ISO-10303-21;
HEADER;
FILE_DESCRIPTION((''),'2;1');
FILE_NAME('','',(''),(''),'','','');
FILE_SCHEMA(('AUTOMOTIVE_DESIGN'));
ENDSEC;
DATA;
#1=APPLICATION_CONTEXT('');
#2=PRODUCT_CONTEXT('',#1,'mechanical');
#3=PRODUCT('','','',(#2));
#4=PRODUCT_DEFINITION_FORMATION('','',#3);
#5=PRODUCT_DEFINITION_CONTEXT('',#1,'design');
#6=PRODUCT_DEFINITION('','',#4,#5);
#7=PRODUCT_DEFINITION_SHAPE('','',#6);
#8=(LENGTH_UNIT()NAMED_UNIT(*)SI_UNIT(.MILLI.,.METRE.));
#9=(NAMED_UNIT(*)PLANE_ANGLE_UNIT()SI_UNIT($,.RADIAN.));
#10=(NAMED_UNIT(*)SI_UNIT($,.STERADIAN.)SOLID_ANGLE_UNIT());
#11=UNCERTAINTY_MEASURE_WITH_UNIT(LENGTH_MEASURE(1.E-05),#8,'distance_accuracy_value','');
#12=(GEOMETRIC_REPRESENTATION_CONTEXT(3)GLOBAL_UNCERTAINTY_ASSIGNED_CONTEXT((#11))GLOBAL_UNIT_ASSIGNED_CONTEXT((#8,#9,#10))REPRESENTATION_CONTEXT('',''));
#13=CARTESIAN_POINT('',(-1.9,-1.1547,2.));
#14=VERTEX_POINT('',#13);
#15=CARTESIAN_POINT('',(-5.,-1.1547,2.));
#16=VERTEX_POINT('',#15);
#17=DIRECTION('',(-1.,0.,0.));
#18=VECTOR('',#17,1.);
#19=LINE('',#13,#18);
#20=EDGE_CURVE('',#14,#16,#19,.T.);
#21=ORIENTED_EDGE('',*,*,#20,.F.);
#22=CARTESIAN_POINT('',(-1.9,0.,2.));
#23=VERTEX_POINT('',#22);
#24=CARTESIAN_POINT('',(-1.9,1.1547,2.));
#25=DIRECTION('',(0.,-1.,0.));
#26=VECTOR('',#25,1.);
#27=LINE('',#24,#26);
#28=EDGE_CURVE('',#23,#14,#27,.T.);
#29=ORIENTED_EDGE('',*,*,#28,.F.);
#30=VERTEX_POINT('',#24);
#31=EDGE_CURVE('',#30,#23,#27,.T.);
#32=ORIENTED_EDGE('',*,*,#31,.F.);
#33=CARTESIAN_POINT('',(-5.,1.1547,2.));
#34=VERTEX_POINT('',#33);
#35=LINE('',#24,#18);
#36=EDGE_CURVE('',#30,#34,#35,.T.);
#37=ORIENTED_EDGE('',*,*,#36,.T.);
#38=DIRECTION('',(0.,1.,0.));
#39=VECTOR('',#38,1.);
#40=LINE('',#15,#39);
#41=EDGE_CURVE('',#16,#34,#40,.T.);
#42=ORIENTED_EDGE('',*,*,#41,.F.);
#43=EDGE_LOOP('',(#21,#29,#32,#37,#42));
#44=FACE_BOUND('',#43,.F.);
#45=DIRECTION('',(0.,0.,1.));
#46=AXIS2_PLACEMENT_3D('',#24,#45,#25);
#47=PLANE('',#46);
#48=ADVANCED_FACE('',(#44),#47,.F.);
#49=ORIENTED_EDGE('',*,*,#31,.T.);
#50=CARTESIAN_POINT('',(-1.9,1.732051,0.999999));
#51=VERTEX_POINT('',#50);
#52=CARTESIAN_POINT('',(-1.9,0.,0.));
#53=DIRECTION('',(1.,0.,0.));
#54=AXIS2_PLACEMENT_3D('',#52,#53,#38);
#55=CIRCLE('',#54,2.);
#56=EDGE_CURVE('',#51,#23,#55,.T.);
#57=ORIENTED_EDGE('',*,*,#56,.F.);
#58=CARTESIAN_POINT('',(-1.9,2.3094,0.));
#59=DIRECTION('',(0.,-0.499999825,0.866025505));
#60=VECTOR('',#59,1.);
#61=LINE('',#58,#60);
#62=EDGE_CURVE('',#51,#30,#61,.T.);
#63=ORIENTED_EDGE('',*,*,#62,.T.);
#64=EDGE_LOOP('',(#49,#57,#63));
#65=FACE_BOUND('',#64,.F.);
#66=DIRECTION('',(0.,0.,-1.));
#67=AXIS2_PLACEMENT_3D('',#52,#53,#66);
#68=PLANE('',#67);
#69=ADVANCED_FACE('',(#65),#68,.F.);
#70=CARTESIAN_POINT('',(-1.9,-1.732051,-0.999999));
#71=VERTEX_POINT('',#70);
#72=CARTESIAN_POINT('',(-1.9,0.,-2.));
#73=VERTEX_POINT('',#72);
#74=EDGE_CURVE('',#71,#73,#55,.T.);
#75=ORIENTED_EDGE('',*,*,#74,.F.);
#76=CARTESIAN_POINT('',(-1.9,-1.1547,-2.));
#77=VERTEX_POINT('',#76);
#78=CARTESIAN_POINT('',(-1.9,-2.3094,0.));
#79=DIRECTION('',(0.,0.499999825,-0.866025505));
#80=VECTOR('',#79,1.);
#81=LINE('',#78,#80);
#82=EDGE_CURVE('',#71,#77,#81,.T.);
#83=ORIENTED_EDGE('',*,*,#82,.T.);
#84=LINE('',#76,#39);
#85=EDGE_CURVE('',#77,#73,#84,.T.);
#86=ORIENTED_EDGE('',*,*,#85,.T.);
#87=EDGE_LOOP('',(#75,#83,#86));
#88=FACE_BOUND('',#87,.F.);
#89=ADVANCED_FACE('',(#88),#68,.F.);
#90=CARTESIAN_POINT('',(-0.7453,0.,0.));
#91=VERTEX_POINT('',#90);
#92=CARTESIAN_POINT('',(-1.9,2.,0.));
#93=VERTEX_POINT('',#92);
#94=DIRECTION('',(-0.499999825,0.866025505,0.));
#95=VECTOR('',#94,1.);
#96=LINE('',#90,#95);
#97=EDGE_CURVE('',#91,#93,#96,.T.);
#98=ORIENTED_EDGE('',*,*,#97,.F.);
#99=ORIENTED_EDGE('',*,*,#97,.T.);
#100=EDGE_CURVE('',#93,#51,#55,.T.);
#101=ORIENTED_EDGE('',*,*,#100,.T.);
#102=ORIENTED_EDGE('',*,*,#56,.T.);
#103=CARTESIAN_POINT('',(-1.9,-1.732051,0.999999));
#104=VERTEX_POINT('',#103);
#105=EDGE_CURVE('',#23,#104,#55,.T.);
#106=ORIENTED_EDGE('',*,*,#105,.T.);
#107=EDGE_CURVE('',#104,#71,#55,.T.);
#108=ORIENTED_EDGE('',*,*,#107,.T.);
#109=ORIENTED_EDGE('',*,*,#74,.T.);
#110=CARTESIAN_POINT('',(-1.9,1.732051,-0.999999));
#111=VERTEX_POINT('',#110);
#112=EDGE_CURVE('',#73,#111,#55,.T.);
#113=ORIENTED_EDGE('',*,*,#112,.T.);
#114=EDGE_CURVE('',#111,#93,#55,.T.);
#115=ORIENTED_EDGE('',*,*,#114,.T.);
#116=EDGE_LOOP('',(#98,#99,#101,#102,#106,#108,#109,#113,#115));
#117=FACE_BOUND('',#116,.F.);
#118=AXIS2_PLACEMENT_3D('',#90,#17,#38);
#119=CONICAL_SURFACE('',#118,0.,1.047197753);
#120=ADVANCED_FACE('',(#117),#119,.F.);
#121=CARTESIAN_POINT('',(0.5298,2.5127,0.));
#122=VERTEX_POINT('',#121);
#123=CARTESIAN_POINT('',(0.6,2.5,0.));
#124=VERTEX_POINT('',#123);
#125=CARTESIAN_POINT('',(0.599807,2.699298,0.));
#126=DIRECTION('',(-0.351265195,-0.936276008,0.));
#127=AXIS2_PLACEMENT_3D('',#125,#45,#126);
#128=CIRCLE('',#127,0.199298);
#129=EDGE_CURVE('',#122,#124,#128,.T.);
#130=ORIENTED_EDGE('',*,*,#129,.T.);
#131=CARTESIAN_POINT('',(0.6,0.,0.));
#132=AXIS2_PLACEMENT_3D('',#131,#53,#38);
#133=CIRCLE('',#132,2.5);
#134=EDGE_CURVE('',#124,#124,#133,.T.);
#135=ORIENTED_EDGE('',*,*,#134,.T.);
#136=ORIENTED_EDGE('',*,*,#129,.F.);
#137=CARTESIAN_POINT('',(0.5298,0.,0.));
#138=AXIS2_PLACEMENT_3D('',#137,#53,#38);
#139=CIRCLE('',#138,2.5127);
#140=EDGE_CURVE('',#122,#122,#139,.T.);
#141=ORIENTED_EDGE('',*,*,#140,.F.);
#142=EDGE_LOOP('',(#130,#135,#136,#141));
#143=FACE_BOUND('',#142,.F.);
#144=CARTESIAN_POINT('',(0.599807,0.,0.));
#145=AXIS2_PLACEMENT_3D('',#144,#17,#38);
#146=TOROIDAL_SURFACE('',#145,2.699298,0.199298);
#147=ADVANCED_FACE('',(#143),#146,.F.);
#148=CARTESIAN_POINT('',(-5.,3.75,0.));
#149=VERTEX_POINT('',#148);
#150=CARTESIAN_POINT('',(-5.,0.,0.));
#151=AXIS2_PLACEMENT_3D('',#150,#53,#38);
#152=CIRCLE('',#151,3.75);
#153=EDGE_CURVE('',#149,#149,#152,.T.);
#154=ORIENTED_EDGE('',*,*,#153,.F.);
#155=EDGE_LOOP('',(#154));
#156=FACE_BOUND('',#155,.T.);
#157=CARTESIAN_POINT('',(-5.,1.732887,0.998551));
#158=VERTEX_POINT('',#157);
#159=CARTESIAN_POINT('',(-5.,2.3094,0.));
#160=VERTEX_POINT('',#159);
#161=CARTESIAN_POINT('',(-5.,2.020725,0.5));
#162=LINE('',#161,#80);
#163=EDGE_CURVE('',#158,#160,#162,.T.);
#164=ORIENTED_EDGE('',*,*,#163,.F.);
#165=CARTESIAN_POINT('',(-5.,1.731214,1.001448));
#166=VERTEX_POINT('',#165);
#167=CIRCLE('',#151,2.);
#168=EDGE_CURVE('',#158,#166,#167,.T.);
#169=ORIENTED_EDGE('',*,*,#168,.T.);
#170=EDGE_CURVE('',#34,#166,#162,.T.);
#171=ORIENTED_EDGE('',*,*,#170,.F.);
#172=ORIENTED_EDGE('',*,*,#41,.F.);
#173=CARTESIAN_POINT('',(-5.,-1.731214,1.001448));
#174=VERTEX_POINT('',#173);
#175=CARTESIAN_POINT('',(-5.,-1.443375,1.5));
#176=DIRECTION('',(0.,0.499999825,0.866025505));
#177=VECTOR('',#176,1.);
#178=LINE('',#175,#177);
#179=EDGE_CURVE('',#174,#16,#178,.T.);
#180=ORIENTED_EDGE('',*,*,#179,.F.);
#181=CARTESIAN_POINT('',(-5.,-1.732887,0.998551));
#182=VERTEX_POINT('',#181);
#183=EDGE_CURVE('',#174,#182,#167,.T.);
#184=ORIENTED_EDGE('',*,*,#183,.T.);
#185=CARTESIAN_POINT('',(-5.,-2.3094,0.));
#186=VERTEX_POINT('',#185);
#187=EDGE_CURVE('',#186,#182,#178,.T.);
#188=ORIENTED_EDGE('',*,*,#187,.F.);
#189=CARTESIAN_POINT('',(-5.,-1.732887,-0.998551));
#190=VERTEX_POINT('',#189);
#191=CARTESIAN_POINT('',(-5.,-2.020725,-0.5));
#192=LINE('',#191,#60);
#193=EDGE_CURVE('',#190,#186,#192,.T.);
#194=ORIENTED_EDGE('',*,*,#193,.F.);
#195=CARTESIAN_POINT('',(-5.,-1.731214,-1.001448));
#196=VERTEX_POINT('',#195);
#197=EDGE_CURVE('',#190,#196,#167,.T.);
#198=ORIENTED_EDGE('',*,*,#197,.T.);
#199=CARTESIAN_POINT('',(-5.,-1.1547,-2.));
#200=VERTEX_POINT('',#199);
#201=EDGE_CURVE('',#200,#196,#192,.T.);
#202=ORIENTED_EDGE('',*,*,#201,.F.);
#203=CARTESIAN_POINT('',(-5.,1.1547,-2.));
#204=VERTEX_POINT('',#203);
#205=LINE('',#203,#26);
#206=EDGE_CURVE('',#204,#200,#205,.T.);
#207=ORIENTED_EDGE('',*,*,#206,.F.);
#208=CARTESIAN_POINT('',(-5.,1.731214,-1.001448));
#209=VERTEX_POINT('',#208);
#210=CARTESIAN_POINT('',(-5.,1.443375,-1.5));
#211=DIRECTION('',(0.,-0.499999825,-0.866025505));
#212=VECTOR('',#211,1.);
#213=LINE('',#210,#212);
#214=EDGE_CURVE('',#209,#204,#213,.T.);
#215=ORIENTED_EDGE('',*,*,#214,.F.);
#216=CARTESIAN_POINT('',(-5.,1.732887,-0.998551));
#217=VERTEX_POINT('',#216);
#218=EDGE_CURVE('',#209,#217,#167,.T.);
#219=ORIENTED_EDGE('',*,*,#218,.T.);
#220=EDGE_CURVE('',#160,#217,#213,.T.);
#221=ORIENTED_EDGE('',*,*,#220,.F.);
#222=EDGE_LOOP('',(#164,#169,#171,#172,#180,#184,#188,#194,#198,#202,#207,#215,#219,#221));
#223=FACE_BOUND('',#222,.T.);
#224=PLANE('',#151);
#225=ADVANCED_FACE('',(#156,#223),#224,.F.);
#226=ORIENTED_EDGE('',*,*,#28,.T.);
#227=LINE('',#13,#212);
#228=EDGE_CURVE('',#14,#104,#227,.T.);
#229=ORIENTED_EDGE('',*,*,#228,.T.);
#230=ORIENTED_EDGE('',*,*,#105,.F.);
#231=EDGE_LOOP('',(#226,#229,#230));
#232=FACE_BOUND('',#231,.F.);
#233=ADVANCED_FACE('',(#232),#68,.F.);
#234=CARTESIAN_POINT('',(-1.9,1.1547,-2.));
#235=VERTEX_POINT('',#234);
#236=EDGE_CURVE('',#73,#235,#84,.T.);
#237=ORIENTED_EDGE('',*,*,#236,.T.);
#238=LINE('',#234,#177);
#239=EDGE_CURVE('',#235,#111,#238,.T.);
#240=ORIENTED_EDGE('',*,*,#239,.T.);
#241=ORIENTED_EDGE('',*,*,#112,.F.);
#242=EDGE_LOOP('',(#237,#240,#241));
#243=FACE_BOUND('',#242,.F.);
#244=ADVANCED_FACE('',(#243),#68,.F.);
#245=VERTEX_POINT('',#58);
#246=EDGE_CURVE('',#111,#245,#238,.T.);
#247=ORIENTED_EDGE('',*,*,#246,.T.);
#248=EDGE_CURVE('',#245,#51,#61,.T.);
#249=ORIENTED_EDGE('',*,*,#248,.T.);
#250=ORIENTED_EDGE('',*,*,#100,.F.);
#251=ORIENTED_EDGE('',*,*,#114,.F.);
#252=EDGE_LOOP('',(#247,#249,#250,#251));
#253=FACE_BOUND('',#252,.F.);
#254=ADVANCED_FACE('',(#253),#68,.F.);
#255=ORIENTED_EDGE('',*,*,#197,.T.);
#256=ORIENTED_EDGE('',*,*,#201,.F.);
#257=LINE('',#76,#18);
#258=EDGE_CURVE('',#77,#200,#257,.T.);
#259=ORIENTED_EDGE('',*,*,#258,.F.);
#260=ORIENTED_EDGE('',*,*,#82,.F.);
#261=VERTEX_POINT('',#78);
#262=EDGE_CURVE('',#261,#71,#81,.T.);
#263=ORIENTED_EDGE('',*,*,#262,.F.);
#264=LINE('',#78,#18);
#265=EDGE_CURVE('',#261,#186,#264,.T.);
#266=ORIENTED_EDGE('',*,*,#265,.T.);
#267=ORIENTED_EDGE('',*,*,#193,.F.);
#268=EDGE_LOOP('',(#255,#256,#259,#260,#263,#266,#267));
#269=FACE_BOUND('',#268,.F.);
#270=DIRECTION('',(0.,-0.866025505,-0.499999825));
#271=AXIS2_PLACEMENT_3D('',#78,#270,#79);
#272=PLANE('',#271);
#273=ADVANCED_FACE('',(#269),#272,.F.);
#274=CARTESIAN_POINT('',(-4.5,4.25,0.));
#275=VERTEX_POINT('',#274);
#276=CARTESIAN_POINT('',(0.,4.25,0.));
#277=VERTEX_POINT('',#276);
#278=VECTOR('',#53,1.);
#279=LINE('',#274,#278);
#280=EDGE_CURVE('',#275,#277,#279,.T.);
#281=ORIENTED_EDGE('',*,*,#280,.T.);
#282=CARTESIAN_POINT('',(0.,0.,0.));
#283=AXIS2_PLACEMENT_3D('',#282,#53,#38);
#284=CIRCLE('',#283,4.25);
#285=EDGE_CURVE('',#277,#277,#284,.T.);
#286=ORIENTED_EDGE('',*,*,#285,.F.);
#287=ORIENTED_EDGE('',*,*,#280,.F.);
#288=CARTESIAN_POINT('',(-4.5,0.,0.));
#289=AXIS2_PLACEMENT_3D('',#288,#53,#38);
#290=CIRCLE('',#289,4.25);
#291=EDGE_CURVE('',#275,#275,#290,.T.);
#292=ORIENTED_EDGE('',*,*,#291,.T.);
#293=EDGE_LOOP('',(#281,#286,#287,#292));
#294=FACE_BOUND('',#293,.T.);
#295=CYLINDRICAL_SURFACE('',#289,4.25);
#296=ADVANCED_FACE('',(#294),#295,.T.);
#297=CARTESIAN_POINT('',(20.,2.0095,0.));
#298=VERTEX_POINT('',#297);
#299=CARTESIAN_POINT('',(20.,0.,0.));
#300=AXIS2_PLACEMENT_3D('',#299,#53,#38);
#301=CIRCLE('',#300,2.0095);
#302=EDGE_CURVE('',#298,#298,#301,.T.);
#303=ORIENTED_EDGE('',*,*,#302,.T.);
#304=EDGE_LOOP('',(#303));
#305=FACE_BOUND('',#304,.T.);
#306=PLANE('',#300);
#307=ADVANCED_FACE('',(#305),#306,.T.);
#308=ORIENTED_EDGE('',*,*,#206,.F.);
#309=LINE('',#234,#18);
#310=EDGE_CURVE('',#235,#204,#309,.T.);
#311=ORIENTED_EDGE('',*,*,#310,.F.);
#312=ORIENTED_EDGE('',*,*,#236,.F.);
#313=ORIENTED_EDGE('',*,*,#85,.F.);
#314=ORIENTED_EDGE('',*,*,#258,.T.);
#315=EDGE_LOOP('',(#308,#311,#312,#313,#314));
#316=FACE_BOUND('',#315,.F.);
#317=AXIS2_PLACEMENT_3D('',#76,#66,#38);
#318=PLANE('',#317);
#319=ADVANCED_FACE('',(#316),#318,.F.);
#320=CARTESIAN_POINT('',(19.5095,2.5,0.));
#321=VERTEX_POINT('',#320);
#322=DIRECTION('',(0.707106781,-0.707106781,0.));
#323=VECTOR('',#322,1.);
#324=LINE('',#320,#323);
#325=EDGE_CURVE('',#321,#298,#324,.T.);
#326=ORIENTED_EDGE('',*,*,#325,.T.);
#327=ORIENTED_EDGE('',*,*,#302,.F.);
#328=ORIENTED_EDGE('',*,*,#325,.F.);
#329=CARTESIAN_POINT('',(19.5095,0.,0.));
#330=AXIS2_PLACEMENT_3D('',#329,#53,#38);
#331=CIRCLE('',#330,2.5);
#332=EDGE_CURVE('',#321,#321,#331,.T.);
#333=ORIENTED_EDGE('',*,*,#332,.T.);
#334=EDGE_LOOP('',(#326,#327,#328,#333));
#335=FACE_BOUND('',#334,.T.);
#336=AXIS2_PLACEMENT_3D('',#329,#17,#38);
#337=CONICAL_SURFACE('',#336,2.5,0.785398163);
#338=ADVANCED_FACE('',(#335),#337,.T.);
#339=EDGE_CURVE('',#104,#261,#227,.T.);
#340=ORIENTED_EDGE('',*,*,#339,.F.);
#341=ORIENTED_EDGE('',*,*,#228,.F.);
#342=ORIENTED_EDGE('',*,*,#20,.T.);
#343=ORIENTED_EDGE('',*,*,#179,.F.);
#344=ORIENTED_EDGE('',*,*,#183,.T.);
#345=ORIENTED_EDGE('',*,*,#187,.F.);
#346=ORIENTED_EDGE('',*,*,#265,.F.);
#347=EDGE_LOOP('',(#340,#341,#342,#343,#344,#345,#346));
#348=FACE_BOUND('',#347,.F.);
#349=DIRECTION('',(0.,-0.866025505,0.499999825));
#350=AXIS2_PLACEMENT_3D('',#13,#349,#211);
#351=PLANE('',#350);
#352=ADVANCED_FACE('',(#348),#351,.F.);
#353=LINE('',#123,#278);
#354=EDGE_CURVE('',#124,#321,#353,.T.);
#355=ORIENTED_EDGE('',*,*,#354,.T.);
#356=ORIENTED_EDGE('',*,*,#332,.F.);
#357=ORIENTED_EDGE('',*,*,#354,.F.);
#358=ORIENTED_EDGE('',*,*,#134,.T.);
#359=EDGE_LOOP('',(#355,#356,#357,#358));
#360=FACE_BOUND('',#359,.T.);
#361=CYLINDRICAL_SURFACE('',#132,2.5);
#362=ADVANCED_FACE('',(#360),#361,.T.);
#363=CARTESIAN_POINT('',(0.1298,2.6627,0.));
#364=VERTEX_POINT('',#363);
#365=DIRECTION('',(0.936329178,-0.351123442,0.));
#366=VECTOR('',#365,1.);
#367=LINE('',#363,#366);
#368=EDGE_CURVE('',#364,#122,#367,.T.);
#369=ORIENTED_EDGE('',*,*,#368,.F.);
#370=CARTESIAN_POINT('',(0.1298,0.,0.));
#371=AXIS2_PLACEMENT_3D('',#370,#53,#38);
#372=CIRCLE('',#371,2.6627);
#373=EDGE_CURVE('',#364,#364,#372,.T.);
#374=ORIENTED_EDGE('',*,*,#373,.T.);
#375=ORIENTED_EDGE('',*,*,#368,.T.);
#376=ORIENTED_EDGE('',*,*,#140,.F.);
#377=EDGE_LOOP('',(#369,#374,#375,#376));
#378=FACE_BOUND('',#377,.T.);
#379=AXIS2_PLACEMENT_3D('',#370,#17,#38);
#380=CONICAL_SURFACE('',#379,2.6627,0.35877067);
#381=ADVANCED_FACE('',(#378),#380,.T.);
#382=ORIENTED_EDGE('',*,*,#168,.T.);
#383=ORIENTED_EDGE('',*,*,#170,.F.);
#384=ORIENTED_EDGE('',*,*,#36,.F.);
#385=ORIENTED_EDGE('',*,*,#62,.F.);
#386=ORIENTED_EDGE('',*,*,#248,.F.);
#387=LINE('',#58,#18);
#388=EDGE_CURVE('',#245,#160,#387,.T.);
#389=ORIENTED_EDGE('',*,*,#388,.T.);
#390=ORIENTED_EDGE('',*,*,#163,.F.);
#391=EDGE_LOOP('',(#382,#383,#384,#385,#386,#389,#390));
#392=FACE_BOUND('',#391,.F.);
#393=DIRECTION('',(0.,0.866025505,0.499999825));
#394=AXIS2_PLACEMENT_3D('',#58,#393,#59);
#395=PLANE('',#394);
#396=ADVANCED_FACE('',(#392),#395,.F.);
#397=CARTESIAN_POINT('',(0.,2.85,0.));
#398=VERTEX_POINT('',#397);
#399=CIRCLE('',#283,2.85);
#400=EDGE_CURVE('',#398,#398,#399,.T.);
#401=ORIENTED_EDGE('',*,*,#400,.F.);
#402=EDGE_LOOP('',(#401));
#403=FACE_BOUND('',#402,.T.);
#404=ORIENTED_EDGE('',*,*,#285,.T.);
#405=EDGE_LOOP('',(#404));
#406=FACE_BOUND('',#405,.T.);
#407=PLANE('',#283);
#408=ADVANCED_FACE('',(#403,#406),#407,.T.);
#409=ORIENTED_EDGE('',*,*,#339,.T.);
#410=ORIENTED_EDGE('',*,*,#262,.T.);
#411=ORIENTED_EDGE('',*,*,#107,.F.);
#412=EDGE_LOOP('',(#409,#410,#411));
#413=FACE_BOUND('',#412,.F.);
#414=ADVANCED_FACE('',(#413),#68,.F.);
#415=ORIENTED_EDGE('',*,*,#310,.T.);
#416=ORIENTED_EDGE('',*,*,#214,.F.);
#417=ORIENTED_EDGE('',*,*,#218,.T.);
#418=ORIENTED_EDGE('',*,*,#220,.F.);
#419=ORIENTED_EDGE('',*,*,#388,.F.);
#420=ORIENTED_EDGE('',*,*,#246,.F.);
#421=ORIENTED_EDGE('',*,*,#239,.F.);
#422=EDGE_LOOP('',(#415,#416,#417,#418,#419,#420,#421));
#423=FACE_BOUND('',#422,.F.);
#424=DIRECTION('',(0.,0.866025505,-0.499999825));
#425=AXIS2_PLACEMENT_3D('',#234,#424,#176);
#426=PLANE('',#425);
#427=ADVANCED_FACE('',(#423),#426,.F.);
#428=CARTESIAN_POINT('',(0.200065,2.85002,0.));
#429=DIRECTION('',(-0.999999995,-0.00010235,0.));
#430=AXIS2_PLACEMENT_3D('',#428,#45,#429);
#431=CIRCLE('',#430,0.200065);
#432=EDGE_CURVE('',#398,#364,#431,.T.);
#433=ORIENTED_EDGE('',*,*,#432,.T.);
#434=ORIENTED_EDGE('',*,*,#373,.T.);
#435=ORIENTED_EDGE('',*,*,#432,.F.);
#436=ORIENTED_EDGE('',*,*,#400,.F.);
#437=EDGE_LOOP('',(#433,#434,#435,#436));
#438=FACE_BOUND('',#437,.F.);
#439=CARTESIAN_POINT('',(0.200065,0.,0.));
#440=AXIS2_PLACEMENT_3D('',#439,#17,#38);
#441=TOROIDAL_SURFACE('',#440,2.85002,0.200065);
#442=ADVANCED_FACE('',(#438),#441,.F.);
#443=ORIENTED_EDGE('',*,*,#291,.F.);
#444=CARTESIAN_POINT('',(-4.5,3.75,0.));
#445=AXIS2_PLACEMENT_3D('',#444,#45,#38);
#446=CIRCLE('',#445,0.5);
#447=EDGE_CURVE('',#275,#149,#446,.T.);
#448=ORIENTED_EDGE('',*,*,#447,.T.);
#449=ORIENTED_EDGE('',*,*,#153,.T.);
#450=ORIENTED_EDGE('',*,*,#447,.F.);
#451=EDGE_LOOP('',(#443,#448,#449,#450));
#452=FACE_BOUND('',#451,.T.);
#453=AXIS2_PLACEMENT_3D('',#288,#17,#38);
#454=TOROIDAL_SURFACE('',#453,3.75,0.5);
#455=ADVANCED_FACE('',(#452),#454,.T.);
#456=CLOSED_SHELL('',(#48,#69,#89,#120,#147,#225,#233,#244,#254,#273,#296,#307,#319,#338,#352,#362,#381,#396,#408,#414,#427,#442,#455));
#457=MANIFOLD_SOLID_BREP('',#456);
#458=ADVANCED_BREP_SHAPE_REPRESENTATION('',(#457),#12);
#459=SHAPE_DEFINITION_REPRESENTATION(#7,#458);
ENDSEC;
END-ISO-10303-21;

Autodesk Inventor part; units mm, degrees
sketch "Skizze_2" plane through (0, 0, 0) normal (0, 0, 1) x (1, 0, 0)
  line L0 (20, 0) -> (-0.7453, 0)
  line L1 (-0.7453, 0) -> (-1.9, 2)
  line L2 (-1.9, 2) -> (-5, 2)
  line L3 (-5, 2) -> (-5, 3.75)
  arc A0 (-4.5, 4.25) -> (-5, 3.75) centre (-4.5, 3.75) ccw
  line L4 (-4.5, 4.25) -> (0, 4.25)
  line L5 (0, 4.25) -> (0, 2.85)
  arc A1 (0, 2.85) -> (0.1298, 2.6627) centre (0.2, 2.85) ccw
  line L6 (0.1298, 2.6627) -> (0.5298, 2.5127)
  arc A2 (0.5298, 2.5127) -> (0.6, 2.5) centre (0.6, 2.7) ccw
  line L7 (0.6, 2.5) -> (19.5095, 2.5)
  line L8 (19.5095, 2.5) -> (20, 2.0095)
  line L9 (20, 2.0095) -> (20, 0)
  line L10 (20, 0) -> (-0.7453, 0)
revolve "Revolution1" add sketch "Skizze_2" angle 360 about axis through (20, 0, 0) along (1, 0, 0)
thread "Thread1" size "M5x0.8" class "6g" standard "ISO Metric profile" length 1.9095
sketch "Skizze_1" plane through (-1.9, 0, 0) normal (1, 0, 0) x (0, 0, -1)
  line L0 (-2, -1.1547) -> (0, -2.3094)
  line L1 (0, -2.3094) -> (2, -1.1547)
  line L2 (2, -1.1547) -> (2, 1.1547)
  line L3 (2, 1.1547) -> (0, 2.3094)
  line L4 (0, 2.3094) -> (-2, 1.1547)
  line L5 (-2, 1.1547) -> (-2, -1.1547)
extrude "Extrusion1" cut sketch "Skizze_1" against normal blind 5
ref_plane "IP1_XY" through (0, 0, 0) normal (1, 0, 0) x (0, 0, -1)
ref_plane "IP1_YZ" through (0, 0, 0) normal (0, 0, -1) x (0, 1, 0)
ref_plane "IP1_ZX" through (0, 0, 0) normal (0, 1, 0) x (1, 0, 0)
ref_plane "IP2_XY" through (-5, 0, 0) normal (1, 0, 0) x (0, 0, -1)
ref_plane "IP2_YZ" through (-5, 0, 0) normal (0, 0, -1) x (0, 1, 0)
ref_plane "IP2_ZX" through (-5, 0, 0) normal (0, 1, 0) x (1, 0, 0)
ref_plane "IP3_XY" through (20, 0, 0) normal (1, 0, 0) x (0, 0, -1)
ref_plane "IP3_YZ" through (20, 0, 0) normal (0, 0, -1) x (0, 1, 0)
ref_plane "IP3_ZX" through (20, 0, 0) normal (0, 1, 0) x (1, 0, 0)
ref_plane "IP4_XY" through (0, 0, 0) normal (1, 0, 0) x (0, 0, -1)
ref_plane "IP4_YZ" through (0, 0, 0) normal (0, 0, -1) x (0, 1, 0)
ref_plane "IP4_ZX" through (0, 0, 0) normal (0, 1, 0) x (1, 0, 0)
properties part number "Slotted head cap screw ISO 4762 - M5x20"
